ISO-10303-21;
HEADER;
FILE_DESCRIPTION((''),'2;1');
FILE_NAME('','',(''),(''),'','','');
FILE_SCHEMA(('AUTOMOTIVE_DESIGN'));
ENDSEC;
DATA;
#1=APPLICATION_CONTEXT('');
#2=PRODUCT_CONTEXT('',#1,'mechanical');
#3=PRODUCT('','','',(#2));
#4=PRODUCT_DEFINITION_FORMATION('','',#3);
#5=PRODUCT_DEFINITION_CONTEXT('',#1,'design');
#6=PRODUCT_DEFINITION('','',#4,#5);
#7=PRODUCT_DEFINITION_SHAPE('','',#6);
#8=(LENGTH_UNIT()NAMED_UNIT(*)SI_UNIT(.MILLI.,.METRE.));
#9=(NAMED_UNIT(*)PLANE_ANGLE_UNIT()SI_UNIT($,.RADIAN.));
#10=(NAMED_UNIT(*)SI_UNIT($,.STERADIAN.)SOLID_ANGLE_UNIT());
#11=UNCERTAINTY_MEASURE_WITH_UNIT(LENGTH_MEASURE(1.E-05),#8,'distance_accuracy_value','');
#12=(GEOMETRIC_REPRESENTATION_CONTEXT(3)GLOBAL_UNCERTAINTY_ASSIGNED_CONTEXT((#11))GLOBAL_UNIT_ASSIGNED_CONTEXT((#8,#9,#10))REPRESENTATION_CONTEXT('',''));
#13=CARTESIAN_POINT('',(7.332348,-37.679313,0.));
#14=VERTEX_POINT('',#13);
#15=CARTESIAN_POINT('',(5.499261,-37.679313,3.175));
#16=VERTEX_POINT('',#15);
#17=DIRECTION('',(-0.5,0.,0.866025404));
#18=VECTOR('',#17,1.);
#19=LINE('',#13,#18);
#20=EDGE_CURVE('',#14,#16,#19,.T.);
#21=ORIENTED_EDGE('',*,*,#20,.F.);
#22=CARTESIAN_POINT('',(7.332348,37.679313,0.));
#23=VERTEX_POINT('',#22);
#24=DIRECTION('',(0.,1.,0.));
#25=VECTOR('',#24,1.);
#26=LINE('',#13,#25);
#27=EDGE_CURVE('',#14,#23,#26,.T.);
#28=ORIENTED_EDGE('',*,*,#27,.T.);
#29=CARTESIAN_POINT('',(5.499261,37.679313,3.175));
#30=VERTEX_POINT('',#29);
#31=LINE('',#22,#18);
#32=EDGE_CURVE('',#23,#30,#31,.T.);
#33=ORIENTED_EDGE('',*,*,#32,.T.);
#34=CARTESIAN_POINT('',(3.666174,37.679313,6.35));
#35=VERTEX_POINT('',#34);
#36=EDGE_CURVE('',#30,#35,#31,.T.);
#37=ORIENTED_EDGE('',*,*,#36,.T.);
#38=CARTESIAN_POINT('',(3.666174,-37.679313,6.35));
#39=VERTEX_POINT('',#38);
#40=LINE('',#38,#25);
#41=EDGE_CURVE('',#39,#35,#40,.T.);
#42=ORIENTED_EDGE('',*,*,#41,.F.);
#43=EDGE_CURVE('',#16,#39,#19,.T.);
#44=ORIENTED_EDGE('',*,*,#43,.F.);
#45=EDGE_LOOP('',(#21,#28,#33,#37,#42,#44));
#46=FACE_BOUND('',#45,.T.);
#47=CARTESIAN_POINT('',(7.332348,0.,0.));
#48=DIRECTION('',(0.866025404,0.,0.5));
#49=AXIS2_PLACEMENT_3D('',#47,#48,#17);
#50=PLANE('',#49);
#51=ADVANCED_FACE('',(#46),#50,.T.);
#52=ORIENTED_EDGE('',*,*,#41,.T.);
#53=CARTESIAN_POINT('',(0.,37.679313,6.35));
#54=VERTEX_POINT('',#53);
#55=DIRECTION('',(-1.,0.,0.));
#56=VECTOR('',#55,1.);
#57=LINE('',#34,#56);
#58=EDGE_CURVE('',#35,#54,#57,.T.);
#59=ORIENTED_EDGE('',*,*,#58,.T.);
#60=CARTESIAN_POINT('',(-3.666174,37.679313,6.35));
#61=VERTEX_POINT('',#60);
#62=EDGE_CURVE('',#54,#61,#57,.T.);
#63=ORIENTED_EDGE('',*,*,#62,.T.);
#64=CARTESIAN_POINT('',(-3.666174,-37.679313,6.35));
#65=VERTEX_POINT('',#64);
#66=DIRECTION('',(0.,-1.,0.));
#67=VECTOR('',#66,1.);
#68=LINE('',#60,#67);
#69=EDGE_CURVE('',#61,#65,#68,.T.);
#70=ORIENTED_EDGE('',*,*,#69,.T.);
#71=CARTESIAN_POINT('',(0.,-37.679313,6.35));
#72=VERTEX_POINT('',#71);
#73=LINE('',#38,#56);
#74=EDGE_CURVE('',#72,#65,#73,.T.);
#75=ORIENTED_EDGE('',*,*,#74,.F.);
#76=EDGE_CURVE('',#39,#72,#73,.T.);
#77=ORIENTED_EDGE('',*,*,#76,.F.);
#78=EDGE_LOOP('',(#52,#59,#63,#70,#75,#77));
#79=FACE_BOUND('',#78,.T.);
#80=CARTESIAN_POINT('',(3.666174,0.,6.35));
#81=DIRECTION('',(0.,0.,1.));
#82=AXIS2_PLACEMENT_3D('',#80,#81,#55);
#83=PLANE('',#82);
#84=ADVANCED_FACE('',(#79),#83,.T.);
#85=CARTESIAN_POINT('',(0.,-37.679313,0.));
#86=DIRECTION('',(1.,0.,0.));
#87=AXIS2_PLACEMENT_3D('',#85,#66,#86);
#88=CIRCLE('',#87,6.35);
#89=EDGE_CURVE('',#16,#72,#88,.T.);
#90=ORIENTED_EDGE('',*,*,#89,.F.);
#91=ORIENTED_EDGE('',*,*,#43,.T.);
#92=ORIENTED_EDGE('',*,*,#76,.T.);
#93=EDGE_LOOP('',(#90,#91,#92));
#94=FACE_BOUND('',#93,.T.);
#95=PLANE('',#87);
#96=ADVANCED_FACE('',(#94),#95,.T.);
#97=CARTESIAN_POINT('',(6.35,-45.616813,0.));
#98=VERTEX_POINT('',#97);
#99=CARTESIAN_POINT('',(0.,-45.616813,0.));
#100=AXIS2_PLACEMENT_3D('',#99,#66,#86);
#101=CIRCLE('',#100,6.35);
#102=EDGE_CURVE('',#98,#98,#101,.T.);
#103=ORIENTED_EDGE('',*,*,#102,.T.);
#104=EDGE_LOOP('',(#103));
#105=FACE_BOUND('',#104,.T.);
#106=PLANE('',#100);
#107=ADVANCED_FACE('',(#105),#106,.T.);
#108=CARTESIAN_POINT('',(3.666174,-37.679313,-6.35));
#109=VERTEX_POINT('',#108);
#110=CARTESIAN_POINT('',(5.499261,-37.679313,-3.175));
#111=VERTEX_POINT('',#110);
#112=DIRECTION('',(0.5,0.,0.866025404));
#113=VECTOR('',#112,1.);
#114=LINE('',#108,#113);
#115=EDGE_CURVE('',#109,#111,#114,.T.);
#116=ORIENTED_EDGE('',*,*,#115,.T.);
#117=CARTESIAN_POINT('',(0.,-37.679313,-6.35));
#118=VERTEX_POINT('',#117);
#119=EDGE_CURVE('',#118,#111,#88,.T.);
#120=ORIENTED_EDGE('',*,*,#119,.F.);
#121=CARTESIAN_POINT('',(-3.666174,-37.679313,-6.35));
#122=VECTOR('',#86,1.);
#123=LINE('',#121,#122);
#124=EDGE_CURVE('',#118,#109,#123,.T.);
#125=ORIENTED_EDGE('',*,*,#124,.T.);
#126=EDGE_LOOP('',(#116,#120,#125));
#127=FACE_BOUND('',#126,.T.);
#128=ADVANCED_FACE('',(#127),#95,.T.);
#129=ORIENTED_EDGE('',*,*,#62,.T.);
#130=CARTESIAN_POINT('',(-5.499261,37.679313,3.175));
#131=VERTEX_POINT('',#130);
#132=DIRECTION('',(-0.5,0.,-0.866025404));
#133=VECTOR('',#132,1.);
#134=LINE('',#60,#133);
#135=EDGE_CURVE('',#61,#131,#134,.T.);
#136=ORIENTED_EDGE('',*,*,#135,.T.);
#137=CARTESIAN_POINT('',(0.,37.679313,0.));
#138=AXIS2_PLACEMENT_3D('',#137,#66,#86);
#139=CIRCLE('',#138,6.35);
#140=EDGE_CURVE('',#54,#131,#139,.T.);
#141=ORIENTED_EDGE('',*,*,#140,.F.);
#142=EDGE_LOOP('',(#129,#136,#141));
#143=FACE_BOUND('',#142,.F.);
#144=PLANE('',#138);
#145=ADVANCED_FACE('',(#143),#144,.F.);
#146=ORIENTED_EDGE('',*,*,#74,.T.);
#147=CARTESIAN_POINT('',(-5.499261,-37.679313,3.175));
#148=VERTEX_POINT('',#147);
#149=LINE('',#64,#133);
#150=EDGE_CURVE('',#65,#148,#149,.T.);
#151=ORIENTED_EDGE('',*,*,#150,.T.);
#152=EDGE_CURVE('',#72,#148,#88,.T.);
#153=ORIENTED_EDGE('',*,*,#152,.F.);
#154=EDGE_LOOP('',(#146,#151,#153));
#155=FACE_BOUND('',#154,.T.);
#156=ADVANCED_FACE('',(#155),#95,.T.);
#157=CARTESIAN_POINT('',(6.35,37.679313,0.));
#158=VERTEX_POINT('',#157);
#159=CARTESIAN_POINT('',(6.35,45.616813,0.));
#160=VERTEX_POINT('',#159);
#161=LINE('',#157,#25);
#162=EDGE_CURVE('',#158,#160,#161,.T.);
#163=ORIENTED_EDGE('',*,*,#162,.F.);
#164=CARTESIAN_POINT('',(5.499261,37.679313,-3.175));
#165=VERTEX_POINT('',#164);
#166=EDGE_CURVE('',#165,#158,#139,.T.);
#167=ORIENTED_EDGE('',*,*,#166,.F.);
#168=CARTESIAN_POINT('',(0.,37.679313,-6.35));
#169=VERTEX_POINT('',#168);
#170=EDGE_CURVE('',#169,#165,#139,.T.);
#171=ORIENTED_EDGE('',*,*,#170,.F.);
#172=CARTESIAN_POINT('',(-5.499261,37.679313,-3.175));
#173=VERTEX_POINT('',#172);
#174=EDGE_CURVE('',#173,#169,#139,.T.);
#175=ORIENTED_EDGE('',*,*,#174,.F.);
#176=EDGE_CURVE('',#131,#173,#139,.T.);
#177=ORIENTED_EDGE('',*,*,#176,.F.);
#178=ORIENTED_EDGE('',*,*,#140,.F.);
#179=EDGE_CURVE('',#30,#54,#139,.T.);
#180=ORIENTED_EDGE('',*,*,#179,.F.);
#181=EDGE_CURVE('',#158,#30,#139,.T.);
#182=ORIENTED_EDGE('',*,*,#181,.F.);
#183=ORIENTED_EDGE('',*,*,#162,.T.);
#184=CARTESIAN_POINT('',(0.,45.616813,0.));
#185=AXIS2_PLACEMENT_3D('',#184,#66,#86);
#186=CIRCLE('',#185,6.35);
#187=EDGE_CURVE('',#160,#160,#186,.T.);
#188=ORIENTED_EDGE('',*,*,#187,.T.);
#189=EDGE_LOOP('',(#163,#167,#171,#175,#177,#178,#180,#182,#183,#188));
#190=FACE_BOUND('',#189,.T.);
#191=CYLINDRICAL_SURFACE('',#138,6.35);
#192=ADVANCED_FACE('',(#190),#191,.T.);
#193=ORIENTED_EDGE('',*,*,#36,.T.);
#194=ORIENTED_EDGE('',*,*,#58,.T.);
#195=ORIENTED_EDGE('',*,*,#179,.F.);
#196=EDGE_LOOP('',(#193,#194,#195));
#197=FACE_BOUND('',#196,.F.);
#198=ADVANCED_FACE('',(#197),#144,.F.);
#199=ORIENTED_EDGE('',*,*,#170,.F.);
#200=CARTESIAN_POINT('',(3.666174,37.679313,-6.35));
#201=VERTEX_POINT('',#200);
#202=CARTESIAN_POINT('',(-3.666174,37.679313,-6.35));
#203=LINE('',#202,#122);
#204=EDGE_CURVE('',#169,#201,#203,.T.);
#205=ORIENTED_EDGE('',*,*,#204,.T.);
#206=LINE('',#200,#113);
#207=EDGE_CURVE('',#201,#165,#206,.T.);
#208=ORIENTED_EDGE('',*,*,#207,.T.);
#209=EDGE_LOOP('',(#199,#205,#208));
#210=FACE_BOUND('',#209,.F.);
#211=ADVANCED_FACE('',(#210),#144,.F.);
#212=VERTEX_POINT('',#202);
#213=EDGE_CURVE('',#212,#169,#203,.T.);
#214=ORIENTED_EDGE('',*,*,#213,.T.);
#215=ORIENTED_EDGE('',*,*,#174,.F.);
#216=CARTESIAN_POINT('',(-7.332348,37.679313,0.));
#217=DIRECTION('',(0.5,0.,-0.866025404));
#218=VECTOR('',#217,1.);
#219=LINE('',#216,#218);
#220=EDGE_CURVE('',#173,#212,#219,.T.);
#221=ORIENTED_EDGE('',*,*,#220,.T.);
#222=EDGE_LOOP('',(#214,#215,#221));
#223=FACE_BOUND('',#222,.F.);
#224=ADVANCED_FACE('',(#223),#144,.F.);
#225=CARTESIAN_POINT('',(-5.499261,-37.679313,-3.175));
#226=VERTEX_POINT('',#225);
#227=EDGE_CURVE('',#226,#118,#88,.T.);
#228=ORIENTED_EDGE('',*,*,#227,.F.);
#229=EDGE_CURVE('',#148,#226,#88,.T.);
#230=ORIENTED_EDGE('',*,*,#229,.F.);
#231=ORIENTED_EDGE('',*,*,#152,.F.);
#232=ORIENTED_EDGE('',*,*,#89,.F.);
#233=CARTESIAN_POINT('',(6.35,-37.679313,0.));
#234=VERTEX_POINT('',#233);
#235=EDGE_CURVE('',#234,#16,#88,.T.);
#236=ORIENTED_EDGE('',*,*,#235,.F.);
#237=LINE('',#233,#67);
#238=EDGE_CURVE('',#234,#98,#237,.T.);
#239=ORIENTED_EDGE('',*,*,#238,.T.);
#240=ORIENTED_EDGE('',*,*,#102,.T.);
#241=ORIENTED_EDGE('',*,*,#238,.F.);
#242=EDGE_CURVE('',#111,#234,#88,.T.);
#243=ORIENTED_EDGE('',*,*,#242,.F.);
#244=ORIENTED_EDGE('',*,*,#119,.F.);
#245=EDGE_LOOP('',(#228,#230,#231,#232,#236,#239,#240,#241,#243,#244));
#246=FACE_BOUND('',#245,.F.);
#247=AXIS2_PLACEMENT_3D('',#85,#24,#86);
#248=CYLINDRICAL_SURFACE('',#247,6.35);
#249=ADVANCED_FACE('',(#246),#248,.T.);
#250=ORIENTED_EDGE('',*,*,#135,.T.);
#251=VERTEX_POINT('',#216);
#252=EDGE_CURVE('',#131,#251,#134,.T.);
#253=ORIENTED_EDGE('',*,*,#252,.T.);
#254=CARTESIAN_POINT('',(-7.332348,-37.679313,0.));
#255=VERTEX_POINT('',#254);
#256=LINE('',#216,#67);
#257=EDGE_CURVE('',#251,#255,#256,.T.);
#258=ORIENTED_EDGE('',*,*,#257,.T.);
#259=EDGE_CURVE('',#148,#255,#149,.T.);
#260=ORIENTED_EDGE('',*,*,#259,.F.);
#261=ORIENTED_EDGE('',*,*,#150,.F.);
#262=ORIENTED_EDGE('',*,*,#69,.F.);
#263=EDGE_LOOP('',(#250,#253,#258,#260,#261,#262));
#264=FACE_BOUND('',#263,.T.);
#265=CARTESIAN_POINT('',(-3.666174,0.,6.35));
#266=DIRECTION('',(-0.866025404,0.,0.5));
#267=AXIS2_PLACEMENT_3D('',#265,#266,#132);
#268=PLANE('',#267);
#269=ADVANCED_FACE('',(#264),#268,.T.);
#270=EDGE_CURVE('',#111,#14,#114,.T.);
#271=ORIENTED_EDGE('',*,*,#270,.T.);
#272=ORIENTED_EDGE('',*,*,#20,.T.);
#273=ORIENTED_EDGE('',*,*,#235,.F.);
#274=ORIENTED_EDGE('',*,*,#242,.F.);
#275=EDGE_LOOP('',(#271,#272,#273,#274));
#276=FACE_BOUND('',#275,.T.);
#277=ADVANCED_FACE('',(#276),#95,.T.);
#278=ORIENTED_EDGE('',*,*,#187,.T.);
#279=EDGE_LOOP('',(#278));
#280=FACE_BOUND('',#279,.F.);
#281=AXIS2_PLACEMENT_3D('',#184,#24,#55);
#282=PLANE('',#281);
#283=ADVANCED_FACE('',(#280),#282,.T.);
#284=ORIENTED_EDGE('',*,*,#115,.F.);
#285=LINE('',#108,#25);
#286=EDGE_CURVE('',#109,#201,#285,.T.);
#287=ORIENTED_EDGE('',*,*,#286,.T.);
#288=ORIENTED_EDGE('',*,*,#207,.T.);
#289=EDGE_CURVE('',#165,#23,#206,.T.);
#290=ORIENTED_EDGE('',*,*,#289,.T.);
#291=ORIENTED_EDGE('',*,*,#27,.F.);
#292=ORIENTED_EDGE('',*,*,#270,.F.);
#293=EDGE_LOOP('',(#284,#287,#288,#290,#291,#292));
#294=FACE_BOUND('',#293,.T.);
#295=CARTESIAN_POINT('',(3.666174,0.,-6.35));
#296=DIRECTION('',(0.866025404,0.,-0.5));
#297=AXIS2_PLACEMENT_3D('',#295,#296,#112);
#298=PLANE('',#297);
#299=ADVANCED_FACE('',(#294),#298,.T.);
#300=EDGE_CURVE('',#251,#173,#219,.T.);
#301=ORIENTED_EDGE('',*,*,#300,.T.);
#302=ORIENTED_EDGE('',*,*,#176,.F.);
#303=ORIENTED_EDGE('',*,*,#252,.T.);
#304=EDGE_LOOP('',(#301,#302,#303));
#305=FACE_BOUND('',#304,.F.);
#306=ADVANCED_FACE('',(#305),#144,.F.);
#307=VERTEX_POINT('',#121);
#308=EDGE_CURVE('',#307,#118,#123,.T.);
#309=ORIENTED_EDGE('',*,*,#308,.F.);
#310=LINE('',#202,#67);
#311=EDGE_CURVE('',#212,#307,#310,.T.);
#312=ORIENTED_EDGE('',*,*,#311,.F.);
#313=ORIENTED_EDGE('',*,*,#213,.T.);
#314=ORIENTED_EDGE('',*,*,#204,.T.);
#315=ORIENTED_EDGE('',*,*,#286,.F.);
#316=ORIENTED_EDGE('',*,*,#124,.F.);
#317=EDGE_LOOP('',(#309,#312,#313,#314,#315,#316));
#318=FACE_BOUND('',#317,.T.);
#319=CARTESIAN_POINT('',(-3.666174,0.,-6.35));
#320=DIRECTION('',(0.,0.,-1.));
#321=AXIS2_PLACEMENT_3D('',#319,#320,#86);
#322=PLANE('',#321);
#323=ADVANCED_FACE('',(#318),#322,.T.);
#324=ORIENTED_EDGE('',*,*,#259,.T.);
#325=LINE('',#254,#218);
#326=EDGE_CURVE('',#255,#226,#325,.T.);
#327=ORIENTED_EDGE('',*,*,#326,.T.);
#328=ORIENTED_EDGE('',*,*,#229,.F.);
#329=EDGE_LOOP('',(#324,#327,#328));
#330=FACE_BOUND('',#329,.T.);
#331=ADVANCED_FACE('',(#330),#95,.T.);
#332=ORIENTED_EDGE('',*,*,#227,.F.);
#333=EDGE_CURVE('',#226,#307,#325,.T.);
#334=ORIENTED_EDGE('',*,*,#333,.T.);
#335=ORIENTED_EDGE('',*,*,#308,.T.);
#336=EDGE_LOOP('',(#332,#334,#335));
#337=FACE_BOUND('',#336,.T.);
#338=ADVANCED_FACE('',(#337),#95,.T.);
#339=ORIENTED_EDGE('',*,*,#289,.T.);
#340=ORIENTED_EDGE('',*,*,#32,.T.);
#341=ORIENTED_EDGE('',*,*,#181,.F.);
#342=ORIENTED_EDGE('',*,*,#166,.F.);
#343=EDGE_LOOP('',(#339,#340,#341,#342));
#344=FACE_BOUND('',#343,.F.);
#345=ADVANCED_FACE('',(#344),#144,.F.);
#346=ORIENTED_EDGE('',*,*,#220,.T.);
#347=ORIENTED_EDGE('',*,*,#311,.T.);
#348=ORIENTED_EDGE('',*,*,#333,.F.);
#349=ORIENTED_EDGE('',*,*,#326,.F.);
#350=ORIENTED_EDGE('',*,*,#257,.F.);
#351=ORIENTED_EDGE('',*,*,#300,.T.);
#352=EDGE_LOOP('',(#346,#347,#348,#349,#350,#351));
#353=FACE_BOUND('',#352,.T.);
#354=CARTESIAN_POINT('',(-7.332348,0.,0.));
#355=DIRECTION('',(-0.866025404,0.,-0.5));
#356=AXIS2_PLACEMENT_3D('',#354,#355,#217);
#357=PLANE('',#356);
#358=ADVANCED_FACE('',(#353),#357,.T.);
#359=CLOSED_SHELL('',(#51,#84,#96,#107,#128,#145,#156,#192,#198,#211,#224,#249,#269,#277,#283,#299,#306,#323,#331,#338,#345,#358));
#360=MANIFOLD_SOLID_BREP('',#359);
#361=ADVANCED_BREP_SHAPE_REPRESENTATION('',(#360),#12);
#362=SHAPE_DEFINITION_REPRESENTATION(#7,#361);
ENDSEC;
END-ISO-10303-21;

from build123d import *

# Parameters (mm, degrees)
F1_DEPTH = 37.6793125
F2_R     = 6.35
F3_DEPTH = 7.9375


# Not quite as in the source:
# - a pattern or mirror of a feature is missing from the dataset's text; its kind, count and spacing are read off the source's solid


with BuildPart() as f1:
    # F0 (on Front) → F1 (new body, symmetric)
    with BuildSketch(Plane.XZ):
        Polygon((3.6661742094, 6.35), (-3.6661742094, 6.35), (-7.3323484187, 0), (-3.6661742094, -6.35), (3.6661742094, -6.35), (7.3323484187, 0), align=None)
    extrude(amount=F1_DEPTH, both=True)

    # F2 (on face) → F3 (join)
    with BuildSketch(Plane.XZ.offset(37.6793125)):
        Circle(F2_R)
    f3 = extrude(amount=F3_DEPTH)

    # F3_copies: F3 across plane
    add(f3.mirror(Plane.ZX))


solid = f1.part
